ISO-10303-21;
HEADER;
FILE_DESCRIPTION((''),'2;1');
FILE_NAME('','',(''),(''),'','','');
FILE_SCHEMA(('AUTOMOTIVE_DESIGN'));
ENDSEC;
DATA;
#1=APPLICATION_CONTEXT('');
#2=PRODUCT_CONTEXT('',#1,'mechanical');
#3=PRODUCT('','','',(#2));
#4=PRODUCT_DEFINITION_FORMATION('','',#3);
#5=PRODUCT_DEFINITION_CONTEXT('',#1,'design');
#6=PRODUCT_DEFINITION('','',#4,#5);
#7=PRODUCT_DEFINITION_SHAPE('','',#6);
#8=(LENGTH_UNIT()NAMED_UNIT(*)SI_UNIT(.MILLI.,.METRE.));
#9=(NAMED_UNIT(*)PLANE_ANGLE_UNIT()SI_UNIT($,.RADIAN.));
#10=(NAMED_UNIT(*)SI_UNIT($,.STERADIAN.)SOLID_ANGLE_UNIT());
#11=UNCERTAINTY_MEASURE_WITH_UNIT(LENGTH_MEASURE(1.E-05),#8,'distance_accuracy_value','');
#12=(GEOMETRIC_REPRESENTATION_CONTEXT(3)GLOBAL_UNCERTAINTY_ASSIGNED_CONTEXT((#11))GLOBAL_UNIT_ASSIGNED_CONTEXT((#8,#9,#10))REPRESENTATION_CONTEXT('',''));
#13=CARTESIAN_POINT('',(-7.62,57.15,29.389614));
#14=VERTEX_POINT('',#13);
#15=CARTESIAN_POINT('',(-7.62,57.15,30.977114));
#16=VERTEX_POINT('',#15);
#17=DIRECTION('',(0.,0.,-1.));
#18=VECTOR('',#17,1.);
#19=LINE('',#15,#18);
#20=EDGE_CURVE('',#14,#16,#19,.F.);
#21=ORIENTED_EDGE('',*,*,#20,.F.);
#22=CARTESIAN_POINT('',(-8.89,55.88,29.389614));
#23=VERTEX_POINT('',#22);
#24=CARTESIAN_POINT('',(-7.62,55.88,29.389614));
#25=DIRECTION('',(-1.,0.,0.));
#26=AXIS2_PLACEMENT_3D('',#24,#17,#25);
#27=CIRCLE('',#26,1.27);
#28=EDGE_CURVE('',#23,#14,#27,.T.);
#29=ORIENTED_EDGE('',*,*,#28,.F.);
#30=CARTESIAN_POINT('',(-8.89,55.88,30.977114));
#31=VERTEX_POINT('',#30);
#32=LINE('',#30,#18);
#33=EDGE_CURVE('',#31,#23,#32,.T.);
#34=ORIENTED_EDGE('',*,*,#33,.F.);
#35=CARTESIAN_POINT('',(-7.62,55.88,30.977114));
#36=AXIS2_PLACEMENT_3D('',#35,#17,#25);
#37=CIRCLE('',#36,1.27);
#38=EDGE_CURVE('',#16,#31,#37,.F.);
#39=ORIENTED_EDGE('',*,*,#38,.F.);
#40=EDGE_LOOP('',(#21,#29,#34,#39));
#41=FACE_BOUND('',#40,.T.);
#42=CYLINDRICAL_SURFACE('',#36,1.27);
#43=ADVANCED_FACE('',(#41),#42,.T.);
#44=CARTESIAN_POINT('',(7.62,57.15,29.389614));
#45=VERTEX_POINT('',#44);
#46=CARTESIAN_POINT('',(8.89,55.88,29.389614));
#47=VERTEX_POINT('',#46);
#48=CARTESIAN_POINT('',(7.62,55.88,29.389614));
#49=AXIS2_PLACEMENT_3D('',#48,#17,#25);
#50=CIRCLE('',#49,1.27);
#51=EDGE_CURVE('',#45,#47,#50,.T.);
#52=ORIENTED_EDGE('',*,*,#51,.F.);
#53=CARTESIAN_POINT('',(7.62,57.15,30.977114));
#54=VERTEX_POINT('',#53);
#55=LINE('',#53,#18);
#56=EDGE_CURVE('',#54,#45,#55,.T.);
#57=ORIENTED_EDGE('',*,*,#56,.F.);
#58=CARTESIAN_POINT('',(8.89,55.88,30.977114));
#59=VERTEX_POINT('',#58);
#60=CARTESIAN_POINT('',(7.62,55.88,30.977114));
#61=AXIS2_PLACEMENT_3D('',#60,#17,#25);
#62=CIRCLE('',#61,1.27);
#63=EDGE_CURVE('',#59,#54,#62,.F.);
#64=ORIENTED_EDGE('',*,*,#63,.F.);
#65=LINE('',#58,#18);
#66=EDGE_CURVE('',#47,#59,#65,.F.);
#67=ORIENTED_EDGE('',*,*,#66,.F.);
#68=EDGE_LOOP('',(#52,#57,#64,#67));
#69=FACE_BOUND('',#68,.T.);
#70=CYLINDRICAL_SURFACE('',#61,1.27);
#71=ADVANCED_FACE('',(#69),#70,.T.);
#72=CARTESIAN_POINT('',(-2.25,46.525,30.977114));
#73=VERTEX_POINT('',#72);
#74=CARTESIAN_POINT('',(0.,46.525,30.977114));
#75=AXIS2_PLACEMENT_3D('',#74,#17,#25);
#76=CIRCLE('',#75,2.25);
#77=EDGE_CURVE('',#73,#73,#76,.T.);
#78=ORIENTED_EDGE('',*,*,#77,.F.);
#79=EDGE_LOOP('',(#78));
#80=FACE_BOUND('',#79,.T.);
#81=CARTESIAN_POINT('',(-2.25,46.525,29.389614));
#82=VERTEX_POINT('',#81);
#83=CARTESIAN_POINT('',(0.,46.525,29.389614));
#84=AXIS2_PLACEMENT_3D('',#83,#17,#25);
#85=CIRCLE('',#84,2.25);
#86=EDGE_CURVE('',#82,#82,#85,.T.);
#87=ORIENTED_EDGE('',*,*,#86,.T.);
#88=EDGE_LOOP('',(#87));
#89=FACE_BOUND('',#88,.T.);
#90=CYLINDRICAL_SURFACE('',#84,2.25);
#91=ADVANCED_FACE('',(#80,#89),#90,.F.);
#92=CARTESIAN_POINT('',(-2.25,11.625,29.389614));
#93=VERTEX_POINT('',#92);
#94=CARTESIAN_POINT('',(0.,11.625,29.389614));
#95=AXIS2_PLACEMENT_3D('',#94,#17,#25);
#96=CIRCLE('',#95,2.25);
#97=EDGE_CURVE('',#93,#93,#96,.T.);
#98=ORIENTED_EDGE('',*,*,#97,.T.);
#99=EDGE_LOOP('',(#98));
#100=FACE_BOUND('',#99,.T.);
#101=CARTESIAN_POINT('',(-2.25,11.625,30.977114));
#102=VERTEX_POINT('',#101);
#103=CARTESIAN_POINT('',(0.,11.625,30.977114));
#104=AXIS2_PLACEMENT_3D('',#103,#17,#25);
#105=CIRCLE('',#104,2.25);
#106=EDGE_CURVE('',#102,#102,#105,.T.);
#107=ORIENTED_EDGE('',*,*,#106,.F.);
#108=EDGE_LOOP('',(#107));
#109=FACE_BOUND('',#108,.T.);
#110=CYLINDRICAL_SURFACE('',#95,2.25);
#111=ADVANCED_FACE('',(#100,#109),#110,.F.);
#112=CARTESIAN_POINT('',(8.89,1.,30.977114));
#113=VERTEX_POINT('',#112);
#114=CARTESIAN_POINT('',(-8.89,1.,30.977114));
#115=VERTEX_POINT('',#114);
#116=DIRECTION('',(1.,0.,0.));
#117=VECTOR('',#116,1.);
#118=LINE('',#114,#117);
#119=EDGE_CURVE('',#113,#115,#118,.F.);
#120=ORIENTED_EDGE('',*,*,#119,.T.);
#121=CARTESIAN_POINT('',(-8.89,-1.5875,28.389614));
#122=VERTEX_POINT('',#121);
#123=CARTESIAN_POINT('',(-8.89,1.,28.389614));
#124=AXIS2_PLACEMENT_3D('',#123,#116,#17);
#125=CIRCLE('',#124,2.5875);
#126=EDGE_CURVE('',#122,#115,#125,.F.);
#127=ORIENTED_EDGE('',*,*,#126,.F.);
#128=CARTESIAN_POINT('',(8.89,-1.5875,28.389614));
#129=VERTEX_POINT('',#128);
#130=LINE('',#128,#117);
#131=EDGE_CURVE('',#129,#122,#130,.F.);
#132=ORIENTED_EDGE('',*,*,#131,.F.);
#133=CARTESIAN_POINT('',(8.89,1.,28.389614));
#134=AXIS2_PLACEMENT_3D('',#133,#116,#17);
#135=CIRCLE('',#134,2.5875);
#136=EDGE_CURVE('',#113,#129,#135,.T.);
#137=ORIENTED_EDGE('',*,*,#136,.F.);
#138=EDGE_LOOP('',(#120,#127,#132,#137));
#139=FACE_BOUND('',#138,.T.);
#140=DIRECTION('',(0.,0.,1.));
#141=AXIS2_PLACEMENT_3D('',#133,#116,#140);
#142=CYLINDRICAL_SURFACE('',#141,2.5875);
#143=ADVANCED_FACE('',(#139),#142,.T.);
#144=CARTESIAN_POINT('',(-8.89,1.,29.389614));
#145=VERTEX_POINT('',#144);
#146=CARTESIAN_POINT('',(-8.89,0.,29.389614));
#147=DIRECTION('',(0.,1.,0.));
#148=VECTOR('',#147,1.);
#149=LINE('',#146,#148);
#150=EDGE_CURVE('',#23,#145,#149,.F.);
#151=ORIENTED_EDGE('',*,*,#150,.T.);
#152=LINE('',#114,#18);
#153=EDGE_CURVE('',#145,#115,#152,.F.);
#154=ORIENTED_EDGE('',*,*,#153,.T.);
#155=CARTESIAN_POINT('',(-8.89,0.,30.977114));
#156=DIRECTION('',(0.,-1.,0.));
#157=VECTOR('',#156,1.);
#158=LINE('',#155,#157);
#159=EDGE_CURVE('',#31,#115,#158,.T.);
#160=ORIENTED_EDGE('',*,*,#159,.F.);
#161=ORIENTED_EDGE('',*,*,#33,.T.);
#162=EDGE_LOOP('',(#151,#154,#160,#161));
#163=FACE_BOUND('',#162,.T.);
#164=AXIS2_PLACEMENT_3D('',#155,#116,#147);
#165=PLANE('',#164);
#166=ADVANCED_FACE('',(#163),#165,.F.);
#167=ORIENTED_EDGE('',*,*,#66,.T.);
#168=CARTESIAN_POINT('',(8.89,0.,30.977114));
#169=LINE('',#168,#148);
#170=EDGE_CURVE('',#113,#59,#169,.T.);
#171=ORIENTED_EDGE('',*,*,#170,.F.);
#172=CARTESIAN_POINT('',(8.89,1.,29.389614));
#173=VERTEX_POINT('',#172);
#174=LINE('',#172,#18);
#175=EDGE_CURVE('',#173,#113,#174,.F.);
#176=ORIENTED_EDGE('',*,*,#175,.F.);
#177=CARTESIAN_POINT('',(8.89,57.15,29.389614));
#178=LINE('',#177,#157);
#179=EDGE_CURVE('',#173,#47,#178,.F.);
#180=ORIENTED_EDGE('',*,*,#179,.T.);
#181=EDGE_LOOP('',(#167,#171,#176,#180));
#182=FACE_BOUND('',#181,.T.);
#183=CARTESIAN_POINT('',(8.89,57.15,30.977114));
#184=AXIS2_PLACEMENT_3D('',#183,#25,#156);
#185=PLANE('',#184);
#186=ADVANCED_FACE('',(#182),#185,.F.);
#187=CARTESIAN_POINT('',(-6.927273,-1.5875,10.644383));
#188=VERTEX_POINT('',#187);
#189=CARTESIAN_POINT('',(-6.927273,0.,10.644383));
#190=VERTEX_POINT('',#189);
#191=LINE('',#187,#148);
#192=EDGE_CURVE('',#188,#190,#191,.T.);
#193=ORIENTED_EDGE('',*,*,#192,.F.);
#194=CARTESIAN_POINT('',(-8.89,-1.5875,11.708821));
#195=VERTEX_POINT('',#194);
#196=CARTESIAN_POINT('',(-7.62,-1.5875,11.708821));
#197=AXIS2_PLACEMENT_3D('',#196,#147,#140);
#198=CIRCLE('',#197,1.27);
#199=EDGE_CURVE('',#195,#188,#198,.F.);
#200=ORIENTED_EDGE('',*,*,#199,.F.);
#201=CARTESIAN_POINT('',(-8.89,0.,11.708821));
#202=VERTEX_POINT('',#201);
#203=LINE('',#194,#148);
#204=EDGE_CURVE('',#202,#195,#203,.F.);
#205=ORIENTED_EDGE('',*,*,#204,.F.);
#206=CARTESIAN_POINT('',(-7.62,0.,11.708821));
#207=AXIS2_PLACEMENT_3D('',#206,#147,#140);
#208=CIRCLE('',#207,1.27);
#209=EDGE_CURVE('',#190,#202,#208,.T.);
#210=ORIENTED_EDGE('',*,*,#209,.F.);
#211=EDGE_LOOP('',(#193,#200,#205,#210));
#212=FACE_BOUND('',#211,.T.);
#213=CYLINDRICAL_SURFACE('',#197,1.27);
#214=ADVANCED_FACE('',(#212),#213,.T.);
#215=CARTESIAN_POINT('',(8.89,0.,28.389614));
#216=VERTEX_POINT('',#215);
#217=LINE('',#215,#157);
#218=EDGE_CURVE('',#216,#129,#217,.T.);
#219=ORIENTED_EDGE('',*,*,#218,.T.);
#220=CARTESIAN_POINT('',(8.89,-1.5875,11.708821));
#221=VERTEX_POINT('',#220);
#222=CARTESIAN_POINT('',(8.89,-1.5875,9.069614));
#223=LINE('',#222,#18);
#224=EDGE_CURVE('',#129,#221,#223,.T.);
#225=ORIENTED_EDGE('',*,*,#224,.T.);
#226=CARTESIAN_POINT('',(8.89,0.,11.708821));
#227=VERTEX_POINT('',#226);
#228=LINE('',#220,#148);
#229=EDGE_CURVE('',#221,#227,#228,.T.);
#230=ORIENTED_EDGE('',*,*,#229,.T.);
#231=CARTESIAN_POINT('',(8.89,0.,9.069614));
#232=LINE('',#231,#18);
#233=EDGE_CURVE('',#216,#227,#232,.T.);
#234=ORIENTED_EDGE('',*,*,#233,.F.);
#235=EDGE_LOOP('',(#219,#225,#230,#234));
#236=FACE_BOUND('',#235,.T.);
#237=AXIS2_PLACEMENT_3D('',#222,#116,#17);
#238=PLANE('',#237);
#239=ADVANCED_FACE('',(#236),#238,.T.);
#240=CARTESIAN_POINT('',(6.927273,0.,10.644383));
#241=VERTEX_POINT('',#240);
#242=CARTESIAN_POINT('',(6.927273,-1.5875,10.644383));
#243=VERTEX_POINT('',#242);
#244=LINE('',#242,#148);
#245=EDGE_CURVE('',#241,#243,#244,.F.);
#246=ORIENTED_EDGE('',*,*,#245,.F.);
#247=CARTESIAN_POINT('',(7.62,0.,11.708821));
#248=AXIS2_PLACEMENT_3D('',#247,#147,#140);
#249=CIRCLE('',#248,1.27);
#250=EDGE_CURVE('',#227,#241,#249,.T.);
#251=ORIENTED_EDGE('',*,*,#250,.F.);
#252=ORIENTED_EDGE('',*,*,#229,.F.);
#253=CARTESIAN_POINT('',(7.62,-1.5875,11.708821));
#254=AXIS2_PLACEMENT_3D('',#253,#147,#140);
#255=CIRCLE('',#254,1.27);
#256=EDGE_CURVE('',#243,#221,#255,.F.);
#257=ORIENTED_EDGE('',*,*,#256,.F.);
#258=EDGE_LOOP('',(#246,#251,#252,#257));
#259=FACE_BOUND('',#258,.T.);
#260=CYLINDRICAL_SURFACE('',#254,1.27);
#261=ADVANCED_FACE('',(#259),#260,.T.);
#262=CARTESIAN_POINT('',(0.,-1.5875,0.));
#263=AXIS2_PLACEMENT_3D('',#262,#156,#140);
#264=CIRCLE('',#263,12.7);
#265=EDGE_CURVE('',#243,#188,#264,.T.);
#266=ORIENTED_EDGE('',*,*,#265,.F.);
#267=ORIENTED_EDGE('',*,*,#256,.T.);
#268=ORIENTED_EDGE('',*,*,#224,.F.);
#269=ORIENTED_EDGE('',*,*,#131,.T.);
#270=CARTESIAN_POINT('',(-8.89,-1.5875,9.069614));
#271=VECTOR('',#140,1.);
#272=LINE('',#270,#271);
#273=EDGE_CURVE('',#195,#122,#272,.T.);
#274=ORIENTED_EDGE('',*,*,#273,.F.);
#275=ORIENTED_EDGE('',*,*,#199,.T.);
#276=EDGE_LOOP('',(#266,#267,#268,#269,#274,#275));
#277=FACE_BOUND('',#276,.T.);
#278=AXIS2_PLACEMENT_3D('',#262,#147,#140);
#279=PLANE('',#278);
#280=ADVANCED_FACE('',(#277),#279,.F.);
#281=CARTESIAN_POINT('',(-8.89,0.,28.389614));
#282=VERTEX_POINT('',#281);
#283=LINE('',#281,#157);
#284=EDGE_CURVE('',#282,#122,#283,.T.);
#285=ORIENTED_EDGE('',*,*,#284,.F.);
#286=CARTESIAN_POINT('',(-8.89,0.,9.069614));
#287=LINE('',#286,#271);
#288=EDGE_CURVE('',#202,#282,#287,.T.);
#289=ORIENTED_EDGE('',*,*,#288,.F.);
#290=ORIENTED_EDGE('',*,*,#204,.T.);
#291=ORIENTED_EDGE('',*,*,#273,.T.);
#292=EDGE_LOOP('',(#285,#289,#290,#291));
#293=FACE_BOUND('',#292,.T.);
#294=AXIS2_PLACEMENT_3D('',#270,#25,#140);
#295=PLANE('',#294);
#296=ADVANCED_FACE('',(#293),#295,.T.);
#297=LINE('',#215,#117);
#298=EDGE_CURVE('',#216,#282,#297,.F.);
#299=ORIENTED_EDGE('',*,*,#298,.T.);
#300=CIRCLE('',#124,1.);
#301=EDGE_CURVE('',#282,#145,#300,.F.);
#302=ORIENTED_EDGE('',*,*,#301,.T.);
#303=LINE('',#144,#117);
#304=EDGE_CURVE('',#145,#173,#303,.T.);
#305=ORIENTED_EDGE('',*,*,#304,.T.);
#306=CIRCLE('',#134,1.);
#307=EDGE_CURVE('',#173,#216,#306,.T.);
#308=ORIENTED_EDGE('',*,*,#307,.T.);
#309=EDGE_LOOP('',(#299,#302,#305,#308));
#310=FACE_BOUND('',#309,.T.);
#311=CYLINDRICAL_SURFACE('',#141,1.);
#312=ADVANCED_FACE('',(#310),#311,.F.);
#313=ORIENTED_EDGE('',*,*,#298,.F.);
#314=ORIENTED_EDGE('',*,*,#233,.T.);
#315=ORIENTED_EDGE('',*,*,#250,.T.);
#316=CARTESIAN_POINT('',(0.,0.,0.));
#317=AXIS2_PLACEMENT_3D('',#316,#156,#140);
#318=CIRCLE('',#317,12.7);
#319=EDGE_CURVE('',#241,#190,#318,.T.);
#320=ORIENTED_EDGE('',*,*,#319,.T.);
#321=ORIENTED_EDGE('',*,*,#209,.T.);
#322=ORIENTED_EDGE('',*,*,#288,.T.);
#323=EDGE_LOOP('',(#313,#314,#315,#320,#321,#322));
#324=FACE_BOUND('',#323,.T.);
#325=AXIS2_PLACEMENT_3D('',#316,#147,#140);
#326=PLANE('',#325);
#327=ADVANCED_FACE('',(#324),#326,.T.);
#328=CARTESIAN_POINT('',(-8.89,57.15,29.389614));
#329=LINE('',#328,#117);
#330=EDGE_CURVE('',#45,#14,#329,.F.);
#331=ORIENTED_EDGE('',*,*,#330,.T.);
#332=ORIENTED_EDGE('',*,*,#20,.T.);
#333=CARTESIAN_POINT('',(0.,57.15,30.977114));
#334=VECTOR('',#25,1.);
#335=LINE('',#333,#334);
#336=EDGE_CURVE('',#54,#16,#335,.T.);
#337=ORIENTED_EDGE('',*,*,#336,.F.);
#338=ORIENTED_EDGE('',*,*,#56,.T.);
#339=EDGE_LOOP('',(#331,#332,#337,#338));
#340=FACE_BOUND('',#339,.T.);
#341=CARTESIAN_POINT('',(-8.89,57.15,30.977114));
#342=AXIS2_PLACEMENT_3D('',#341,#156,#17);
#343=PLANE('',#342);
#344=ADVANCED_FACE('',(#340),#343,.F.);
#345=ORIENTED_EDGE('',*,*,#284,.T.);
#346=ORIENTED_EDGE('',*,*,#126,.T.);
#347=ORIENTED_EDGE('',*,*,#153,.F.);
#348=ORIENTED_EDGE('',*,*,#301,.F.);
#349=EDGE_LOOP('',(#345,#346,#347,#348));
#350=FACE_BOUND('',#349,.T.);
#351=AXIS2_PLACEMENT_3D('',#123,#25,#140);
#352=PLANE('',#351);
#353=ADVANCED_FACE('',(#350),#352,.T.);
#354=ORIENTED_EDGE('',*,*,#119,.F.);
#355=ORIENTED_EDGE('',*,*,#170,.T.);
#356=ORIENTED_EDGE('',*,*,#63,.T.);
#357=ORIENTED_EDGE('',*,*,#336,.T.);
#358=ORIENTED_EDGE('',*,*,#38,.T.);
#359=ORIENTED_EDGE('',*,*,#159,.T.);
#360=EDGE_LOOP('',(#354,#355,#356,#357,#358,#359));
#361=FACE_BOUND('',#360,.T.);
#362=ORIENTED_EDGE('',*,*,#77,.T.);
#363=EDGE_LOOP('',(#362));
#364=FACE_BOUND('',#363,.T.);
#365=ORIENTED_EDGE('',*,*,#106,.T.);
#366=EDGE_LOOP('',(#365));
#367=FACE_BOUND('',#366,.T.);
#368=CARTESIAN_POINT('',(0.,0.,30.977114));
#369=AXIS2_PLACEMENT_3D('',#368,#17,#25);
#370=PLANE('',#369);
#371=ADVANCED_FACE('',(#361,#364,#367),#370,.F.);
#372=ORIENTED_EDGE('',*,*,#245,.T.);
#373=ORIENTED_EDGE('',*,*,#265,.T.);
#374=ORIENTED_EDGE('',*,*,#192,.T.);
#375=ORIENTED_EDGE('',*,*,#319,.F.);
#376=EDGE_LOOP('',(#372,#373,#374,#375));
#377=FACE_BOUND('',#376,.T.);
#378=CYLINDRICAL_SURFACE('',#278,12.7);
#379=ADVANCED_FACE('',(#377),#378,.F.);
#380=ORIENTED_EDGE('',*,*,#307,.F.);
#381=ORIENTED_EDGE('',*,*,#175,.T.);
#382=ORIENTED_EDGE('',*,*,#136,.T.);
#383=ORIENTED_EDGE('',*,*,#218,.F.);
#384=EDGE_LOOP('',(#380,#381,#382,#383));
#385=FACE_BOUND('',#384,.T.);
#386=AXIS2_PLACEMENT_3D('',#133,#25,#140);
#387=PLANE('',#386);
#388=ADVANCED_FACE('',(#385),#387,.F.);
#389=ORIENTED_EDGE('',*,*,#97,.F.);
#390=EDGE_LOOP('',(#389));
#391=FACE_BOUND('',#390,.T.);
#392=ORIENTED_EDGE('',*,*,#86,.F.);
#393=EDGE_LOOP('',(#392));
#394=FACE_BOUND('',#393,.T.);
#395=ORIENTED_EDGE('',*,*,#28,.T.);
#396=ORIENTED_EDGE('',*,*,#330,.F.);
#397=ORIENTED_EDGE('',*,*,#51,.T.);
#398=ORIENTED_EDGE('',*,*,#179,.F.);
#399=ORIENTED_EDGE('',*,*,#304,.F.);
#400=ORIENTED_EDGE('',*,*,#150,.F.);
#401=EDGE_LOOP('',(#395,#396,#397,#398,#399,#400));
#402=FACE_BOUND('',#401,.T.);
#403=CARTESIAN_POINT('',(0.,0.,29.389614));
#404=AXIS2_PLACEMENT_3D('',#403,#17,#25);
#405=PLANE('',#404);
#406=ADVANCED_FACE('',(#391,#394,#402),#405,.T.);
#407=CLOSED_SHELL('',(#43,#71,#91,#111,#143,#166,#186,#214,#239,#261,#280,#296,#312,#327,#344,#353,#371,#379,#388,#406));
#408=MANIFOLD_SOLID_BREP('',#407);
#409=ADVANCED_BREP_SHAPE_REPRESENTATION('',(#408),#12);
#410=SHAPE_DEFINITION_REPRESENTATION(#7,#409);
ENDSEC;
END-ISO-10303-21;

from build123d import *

# Parameters (mm, degrees)
BASE_FLANGE1_DEPTH   = 1.5875
EDGE_FLANGE1_DEPTH   = 17.78
M4_CLEARANCE_HOLE1_D = 4.5
FILLET1_R            = 1.27


# Sheet-metal steps are written as plain solids
with BuildPart() as part:
    # Sketch1 → Base-Flange1 (new body)
    with BuildSketch(Plane(origin=(0, 0, 0), x_dir=(1, 0, 0), z_dir=(0, 1, 0))):
        with BuildLine():
            Line((-8.89, -9.069614104), (-8.89, -28.119614104))
            Line((-8.89, -28.119614104), (8.89, -28.119614104))
            Line((8.89, -28.119614104), (8.89, -9.069614104))
            ThreePointArc((8.89, -9.069614104), (0, -12.7), (-8.89, -9.069614104))
        make_face()
    extrude(amount=-BASE_FLANGE1_DEPTH)

    # Edge-Flange1 section (across the edge) → Edge-Flange1 (add)
    with BuildSketch(Plane(origin=(-8.89, 0, 29.389614104), x_dir=(0, 0, -1), z_dir=(1, 0, 0))):
        with BuildLine():
            Line((-1.5875, 1), (-1.5875, 57.15))
            Line((-1.5875, 57.15), (0, 57.15))
            Line((0, 57.15), (0, 1))
            ThreePointArc((0, 1), (0.292893219, 0.292893219), (1, 0))
            Line((1, 0), (1.27, 0))
            Line((1.27, 0), (1.27, -1.5875))
            Line((1.27, -1.5875), (1, -1.5875))
            ThreePointArc((1, -1.5875), (-0.829638796, -0.829638796), (-1.5875, 1))
        make_face()
    extrude(amount=EDGE_FLANGE1_DEPTH)

    # M4 Clearance Hole1 (through all)
    with Locations(Plane(origin=(0, 0, 29.389614104), x_dir=(-1, 0, 0), z_dir=(0, 0, -1))):
        with Locations((0, 46.524999898), (0, 11.625)):
            Hole(M4_CLEARANCE_HOLE1_D / 2)

    # Fillet1
    fillet1_edges = [part.edges().sort_by_distance(p)[0] for p in [
        (-8.89, 57.15, 30.183364104),
        (8.89, 57.15, 30.183364104),
        (8.89, -0.79375, 9.069614104),
        (-8.89, -0.79375, 9.069614104),
    ]]
    fillet(fillet1_edges, radius=FILLET1_R)


solid = part.part
